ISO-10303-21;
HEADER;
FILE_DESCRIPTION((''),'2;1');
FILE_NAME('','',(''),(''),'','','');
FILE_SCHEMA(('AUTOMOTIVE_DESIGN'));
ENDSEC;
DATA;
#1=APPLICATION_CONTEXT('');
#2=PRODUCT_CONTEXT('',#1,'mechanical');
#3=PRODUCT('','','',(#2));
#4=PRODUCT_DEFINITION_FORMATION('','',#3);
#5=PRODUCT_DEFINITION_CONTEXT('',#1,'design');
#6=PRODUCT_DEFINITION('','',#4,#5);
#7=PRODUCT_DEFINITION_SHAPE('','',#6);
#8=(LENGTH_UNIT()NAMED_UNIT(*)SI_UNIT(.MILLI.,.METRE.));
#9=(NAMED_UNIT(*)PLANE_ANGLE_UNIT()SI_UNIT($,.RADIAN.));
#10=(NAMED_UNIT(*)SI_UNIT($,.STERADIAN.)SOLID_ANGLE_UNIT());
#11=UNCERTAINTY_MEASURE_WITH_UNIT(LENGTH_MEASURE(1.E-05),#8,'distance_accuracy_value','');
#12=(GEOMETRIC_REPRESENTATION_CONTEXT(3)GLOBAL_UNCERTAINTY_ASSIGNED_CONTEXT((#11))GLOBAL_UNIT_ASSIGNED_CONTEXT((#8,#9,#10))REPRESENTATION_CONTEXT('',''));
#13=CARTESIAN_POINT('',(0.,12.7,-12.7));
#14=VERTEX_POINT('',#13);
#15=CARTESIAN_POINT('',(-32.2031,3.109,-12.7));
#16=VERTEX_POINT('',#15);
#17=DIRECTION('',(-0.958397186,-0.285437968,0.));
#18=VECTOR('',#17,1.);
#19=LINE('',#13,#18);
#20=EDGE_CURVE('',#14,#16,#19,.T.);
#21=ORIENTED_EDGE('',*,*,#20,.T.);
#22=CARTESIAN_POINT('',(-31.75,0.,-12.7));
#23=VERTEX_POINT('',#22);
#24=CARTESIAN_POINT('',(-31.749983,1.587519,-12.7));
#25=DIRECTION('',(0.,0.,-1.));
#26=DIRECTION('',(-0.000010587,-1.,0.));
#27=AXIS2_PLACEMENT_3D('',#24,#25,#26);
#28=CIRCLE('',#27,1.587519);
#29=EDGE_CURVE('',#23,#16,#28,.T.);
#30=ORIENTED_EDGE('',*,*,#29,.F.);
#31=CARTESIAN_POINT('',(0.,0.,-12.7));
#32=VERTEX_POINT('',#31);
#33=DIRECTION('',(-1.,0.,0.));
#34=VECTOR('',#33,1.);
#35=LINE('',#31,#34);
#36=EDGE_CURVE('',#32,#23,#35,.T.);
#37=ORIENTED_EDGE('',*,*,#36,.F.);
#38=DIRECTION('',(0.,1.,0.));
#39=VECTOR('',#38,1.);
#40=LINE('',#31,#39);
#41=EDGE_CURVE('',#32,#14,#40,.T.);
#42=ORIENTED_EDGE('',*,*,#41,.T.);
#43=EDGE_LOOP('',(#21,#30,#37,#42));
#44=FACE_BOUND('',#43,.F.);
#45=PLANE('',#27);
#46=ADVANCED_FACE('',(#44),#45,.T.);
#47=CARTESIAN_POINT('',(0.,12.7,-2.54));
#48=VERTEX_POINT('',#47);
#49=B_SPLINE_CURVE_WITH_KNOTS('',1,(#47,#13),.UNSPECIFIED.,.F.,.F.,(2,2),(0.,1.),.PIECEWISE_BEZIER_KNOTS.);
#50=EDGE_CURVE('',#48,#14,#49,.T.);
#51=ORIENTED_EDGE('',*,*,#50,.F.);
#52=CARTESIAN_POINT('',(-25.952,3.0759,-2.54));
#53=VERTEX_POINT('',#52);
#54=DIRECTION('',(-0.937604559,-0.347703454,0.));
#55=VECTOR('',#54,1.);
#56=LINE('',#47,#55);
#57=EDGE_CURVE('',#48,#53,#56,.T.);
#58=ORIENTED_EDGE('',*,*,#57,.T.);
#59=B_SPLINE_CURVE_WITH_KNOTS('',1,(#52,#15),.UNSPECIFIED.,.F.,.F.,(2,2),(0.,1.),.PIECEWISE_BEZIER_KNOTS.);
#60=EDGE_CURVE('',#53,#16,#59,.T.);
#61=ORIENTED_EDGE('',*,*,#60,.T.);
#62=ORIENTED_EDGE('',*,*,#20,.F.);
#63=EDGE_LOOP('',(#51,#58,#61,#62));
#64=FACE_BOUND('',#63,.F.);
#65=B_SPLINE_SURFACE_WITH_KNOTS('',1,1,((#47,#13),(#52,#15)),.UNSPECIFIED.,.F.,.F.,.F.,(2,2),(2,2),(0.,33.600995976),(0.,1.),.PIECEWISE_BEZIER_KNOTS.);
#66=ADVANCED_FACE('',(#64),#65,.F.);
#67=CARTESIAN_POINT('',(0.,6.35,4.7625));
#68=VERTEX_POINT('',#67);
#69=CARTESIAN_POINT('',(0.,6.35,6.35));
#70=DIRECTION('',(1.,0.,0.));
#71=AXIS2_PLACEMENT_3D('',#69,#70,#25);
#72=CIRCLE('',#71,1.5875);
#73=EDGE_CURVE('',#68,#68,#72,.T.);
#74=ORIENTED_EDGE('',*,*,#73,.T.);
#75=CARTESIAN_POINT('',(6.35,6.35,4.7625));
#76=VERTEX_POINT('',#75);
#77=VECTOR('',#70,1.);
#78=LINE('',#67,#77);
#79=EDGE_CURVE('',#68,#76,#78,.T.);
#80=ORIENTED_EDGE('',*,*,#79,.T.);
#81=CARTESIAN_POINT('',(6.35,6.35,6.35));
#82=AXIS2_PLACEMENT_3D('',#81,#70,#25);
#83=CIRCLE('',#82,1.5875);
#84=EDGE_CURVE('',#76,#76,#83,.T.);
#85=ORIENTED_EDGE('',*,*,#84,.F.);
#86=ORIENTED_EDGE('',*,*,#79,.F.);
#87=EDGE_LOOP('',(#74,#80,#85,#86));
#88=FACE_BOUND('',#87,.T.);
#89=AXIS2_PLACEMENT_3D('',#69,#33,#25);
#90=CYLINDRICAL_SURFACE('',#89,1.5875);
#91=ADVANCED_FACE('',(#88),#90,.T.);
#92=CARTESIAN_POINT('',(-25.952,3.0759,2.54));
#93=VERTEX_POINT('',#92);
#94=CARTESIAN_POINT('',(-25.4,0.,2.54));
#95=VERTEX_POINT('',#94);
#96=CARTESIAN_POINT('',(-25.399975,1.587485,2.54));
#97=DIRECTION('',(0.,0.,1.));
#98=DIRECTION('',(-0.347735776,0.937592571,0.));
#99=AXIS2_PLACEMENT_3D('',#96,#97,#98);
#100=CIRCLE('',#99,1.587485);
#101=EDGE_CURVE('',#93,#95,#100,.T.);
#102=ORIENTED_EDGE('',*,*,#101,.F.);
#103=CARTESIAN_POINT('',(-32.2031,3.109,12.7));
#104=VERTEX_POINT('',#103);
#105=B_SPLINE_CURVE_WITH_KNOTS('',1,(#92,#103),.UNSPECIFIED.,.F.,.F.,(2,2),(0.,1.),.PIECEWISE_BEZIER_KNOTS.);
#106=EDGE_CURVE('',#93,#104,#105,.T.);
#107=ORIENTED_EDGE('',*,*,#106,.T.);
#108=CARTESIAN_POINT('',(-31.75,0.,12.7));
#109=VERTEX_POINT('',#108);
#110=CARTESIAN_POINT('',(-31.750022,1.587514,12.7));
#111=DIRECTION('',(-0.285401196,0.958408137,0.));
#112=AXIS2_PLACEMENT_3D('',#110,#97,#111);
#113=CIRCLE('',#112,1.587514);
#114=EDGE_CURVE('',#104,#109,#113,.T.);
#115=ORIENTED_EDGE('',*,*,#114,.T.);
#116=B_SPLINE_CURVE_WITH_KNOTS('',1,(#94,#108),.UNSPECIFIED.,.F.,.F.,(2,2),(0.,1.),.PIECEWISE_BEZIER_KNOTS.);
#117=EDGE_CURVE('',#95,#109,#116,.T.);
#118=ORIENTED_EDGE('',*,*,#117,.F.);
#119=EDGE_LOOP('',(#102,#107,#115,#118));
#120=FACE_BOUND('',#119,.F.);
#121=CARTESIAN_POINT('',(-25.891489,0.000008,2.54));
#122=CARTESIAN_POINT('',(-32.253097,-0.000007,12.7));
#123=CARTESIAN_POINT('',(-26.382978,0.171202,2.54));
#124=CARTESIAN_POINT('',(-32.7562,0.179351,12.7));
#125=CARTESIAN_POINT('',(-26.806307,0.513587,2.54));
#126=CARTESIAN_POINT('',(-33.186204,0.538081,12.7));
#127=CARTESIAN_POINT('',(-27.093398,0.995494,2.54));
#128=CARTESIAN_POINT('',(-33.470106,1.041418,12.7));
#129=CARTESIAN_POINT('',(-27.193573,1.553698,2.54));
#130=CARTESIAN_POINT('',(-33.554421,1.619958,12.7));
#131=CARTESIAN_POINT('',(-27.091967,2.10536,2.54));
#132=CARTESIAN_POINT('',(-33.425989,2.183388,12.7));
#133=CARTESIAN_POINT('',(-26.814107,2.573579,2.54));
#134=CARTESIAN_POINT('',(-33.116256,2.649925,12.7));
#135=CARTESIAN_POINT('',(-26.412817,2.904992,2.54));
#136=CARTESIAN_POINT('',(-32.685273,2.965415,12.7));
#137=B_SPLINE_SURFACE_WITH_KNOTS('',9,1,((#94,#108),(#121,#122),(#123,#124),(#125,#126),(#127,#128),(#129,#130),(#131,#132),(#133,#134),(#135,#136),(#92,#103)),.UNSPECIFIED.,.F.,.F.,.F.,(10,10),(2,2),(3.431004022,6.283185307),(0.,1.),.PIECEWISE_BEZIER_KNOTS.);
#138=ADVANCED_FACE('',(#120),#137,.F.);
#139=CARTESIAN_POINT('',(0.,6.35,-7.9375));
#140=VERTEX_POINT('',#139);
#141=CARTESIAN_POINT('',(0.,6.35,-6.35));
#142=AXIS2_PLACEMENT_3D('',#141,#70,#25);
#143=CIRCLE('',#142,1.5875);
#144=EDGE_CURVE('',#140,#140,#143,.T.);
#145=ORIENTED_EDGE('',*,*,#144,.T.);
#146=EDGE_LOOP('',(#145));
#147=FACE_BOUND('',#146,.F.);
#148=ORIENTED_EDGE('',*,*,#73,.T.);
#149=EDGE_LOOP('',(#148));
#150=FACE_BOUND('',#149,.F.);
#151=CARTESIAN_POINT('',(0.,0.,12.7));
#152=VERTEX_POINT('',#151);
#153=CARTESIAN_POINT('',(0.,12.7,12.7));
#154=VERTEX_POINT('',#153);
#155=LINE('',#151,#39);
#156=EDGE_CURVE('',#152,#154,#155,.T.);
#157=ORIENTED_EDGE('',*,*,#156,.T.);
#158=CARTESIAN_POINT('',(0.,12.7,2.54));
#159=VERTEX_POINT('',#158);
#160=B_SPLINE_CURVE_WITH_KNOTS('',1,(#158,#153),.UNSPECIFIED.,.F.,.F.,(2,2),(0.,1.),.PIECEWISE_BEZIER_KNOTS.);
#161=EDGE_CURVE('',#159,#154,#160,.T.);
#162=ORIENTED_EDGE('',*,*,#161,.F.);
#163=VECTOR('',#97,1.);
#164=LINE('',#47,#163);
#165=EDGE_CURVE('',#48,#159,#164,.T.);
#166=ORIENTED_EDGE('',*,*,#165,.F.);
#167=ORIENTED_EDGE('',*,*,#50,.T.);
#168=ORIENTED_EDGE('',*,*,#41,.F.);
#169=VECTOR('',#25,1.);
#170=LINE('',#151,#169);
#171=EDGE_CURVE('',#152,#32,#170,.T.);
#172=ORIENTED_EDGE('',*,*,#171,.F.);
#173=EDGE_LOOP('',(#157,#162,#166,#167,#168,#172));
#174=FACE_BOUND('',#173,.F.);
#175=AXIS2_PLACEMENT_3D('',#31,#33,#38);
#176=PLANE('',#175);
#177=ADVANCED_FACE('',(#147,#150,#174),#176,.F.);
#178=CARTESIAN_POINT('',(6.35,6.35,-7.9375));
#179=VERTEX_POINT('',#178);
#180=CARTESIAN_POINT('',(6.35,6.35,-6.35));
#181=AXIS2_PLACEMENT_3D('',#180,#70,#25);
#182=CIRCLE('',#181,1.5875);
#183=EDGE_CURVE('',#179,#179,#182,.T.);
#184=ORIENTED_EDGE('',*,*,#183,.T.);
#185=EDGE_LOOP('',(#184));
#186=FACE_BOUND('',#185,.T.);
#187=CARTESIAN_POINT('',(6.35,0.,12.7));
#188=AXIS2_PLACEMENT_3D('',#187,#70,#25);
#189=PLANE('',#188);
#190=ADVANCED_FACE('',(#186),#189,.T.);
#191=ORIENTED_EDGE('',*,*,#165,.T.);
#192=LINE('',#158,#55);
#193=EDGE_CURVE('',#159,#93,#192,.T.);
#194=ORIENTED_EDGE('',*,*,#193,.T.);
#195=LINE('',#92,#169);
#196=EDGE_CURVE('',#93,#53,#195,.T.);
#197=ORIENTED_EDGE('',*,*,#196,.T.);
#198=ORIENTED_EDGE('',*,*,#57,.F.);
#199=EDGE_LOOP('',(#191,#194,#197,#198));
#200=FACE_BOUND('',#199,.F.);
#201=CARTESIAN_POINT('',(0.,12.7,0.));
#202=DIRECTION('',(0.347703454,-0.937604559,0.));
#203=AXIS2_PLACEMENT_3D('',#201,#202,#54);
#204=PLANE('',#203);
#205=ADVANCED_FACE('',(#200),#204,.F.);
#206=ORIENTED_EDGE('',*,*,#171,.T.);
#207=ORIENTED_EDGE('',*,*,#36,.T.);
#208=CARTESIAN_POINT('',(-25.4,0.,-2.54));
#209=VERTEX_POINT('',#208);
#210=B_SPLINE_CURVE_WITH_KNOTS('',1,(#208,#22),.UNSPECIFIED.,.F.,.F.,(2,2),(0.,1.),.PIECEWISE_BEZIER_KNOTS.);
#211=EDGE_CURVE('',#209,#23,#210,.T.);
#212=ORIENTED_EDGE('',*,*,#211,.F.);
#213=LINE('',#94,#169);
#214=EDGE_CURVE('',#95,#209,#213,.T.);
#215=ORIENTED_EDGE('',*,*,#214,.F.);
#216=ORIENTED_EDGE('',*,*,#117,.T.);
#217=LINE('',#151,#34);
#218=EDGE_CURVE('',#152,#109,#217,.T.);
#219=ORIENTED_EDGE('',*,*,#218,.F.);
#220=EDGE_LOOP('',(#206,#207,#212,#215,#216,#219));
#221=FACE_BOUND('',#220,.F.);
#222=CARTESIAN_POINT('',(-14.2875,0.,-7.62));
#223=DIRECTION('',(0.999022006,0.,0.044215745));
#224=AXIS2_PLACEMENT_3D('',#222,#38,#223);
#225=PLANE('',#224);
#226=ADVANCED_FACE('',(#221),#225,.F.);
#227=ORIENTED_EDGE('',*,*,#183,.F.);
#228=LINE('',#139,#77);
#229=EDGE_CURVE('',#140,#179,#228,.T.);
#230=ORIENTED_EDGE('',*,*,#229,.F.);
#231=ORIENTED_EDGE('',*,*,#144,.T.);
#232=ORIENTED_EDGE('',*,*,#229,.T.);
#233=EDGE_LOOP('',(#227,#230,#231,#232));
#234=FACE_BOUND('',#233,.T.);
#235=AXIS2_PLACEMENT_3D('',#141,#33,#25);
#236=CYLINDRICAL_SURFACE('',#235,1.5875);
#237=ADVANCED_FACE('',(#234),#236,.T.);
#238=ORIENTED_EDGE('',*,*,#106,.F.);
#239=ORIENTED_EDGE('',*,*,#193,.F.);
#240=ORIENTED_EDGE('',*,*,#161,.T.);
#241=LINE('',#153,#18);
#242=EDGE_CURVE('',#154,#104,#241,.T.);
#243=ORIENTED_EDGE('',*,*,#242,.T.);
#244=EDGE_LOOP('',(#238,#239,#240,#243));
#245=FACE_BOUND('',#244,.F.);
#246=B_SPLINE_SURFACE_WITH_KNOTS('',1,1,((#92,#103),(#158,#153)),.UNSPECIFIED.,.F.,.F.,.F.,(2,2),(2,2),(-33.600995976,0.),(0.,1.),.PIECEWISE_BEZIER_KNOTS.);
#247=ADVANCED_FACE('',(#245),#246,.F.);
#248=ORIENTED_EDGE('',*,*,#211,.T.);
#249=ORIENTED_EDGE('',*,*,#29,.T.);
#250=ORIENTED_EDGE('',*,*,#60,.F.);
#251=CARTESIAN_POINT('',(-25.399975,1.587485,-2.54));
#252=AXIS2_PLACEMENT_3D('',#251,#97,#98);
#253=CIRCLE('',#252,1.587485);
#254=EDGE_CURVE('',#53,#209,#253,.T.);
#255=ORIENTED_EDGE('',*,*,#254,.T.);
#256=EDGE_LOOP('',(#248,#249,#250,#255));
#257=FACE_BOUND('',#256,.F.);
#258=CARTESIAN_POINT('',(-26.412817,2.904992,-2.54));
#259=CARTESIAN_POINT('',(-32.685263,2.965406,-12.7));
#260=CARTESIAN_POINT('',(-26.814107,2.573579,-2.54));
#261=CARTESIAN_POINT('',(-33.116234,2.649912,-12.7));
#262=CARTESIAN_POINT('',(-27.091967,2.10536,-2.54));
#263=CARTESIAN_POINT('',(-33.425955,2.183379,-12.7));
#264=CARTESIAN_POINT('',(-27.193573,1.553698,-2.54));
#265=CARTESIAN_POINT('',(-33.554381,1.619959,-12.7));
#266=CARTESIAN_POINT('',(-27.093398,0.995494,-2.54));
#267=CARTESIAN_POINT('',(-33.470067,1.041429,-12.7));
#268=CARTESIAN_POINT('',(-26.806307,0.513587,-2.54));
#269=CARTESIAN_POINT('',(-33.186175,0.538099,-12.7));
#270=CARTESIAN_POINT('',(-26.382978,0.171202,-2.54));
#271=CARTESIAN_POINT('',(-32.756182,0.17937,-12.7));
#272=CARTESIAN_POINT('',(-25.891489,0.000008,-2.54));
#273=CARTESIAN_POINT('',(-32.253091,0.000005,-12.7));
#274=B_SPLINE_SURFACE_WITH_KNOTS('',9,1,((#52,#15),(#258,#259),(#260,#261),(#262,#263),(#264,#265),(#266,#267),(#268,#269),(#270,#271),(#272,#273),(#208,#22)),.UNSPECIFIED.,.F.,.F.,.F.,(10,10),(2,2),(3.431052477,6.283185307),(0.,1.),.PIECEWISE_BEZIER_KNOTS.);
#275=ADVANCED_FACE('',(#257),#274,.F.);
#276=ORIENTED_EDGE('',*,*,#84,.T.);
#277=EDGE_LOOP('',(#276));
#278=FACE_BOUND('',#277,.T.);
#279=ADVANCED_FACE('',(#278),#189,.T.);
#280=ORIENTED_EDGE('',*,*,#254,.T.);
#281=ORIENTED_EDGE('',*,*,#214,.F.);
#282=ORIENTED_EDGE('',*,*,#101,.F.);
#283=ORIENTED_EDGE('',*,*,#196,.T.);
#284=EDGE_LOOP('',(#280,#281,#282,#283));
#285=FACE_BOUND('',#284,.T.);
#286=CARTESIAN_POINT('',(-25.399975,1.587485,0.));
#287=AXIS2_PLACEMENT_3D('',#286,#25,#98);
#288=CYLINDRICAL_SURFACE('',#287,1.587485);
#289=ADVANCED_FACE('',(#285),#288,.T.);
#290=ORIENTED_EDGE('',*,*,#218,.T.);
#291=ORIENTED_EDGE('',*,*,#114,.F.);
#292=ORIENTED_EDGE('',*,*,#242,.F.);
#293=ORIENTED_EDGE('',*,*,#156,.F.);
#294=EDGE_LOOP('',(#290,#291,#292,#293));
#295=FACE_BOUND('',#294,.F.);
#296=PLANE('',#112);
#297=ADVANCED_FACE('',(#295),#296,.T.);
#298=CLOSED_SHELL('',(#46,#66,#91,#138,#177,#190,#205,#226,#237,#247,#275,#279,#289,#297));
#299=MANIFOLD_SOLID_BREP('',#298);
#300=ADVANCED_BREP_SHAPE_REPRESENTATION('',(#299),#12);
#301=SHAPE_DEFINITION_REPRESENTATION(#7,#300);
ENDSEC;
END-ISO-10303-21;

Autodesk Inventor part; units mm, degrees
ref_plane "YZ Plane" through (0, 0, 0) normal (1, 0, 0) x (0, 1, 0)
sketch "Sketch1" plane through (0, 0, 0) normal (0, 0, 1) x (1, 0, 0)
  line L0 (0, 0) -> (0, 12.7)
  line L1 (0, 12.7) -> (-25.952, 3.0759)
  line L2 (0, 0) -> (-25.4, 0)
  arc A0 (-25.952, 3.0759) -> (-25.4, 0) centre (-25.4, 1.5875) ccw
  dimension "d0" = 25.4
  dimension "d1" = 3.175
  dimension "d2" = 12.7
extrude "Extrusion1" add sketch "Sketch1" along normal mid plane 5.08
ref_plane "Work Plane1" through (0, 0, 12.7) normal (0, 0, 1) x (1, 0, 0)
sketch "Sketch2" plane through (0, 0, 12.7) normal (0, 0, 1) x (1, 0, 0)
  arc A0 (-32.2031, 3.109) -> (-31.75, 0) centre (-31.75, 1.5875) ccw
  line L0 (0, 0) -> (-31.75, 0)
  line L1 (0, 0) -> (0, 12.7)
  line L2 (0, 12.7) -> (-32.2031, 3.109)
  line L3 (0, 12.7) -> (-25.952, 3.0759) construction
  dimension "d6" = 3.175
  dimension "d7" = 31.75
ref_plane "Work Plane2" through (0, 0, -12.7) normal (0, 0, -1) x (-1, 0, 0)
sketch "Sketch3" plane through (0, 0, -12.7) normal (0, 0, -1) x (-1, 0, 0)
  line L0 (0, 12.7) -> (32.2031, 3.109) projected
  arc A0 (31.75, 0) -> (32.2031, 3.109) centre (31.75, 1.5875) ccw projected
  line L1 (0, 0) -> (31.75, 0) projected
  line L2 (0, 0) -> (0, 12.7) projected
loft "Loft1" add profiles "Sketch2" section 1 edges at (0, 6.35, 2.54) (-12.976, 7.888, 2.54) (-26.9625, 1.3071, 2.54) (-12.7, 0, 2.54)
loft "Loft2" add profiles "Sketch3" section 1 edges at (0, 6.35, -2.54) (-12.7, 0, -2.54) (-26.9625, 1.3071, -2.54) (-12.976, 7.888, -2.54)
sketch "Sketch4" plane through (0, 0, 12.7) normal (1, 0, 0) x (0, 0, -1)
  line L0 (15.24, 12.7) -> (10.16, 12.7) construction
  line L1 (10.16, 12.7) -> (0, 12.7) construction
  line L2 (0, 12.7) -> (0, 0) construction
  line L3 (0, 0) -> (25.4, 0) construction
  line L4 (25.4, 0) -> (25.4, 12.7) construction
  line L5 (15.24, 12.7) -> (25.4, 12.7) construction
  line L6 (0, 12.7) -> (12.7, 0) construction
  line L7 (12.7, 0) -> (25.4, 12.7) construction
  circle A0 centre (6.35, 6.35) radius 1.5875
  circle A1 centre (19.05, 6.35) radius 1.5875
  dimension "d17" = 3.175
  dimension "d18" = 3.175
extrude "Extrusion2" add sketch "Sketch4" along normal blind 6.35
properties part number "Bottom Pivot Mk1"
